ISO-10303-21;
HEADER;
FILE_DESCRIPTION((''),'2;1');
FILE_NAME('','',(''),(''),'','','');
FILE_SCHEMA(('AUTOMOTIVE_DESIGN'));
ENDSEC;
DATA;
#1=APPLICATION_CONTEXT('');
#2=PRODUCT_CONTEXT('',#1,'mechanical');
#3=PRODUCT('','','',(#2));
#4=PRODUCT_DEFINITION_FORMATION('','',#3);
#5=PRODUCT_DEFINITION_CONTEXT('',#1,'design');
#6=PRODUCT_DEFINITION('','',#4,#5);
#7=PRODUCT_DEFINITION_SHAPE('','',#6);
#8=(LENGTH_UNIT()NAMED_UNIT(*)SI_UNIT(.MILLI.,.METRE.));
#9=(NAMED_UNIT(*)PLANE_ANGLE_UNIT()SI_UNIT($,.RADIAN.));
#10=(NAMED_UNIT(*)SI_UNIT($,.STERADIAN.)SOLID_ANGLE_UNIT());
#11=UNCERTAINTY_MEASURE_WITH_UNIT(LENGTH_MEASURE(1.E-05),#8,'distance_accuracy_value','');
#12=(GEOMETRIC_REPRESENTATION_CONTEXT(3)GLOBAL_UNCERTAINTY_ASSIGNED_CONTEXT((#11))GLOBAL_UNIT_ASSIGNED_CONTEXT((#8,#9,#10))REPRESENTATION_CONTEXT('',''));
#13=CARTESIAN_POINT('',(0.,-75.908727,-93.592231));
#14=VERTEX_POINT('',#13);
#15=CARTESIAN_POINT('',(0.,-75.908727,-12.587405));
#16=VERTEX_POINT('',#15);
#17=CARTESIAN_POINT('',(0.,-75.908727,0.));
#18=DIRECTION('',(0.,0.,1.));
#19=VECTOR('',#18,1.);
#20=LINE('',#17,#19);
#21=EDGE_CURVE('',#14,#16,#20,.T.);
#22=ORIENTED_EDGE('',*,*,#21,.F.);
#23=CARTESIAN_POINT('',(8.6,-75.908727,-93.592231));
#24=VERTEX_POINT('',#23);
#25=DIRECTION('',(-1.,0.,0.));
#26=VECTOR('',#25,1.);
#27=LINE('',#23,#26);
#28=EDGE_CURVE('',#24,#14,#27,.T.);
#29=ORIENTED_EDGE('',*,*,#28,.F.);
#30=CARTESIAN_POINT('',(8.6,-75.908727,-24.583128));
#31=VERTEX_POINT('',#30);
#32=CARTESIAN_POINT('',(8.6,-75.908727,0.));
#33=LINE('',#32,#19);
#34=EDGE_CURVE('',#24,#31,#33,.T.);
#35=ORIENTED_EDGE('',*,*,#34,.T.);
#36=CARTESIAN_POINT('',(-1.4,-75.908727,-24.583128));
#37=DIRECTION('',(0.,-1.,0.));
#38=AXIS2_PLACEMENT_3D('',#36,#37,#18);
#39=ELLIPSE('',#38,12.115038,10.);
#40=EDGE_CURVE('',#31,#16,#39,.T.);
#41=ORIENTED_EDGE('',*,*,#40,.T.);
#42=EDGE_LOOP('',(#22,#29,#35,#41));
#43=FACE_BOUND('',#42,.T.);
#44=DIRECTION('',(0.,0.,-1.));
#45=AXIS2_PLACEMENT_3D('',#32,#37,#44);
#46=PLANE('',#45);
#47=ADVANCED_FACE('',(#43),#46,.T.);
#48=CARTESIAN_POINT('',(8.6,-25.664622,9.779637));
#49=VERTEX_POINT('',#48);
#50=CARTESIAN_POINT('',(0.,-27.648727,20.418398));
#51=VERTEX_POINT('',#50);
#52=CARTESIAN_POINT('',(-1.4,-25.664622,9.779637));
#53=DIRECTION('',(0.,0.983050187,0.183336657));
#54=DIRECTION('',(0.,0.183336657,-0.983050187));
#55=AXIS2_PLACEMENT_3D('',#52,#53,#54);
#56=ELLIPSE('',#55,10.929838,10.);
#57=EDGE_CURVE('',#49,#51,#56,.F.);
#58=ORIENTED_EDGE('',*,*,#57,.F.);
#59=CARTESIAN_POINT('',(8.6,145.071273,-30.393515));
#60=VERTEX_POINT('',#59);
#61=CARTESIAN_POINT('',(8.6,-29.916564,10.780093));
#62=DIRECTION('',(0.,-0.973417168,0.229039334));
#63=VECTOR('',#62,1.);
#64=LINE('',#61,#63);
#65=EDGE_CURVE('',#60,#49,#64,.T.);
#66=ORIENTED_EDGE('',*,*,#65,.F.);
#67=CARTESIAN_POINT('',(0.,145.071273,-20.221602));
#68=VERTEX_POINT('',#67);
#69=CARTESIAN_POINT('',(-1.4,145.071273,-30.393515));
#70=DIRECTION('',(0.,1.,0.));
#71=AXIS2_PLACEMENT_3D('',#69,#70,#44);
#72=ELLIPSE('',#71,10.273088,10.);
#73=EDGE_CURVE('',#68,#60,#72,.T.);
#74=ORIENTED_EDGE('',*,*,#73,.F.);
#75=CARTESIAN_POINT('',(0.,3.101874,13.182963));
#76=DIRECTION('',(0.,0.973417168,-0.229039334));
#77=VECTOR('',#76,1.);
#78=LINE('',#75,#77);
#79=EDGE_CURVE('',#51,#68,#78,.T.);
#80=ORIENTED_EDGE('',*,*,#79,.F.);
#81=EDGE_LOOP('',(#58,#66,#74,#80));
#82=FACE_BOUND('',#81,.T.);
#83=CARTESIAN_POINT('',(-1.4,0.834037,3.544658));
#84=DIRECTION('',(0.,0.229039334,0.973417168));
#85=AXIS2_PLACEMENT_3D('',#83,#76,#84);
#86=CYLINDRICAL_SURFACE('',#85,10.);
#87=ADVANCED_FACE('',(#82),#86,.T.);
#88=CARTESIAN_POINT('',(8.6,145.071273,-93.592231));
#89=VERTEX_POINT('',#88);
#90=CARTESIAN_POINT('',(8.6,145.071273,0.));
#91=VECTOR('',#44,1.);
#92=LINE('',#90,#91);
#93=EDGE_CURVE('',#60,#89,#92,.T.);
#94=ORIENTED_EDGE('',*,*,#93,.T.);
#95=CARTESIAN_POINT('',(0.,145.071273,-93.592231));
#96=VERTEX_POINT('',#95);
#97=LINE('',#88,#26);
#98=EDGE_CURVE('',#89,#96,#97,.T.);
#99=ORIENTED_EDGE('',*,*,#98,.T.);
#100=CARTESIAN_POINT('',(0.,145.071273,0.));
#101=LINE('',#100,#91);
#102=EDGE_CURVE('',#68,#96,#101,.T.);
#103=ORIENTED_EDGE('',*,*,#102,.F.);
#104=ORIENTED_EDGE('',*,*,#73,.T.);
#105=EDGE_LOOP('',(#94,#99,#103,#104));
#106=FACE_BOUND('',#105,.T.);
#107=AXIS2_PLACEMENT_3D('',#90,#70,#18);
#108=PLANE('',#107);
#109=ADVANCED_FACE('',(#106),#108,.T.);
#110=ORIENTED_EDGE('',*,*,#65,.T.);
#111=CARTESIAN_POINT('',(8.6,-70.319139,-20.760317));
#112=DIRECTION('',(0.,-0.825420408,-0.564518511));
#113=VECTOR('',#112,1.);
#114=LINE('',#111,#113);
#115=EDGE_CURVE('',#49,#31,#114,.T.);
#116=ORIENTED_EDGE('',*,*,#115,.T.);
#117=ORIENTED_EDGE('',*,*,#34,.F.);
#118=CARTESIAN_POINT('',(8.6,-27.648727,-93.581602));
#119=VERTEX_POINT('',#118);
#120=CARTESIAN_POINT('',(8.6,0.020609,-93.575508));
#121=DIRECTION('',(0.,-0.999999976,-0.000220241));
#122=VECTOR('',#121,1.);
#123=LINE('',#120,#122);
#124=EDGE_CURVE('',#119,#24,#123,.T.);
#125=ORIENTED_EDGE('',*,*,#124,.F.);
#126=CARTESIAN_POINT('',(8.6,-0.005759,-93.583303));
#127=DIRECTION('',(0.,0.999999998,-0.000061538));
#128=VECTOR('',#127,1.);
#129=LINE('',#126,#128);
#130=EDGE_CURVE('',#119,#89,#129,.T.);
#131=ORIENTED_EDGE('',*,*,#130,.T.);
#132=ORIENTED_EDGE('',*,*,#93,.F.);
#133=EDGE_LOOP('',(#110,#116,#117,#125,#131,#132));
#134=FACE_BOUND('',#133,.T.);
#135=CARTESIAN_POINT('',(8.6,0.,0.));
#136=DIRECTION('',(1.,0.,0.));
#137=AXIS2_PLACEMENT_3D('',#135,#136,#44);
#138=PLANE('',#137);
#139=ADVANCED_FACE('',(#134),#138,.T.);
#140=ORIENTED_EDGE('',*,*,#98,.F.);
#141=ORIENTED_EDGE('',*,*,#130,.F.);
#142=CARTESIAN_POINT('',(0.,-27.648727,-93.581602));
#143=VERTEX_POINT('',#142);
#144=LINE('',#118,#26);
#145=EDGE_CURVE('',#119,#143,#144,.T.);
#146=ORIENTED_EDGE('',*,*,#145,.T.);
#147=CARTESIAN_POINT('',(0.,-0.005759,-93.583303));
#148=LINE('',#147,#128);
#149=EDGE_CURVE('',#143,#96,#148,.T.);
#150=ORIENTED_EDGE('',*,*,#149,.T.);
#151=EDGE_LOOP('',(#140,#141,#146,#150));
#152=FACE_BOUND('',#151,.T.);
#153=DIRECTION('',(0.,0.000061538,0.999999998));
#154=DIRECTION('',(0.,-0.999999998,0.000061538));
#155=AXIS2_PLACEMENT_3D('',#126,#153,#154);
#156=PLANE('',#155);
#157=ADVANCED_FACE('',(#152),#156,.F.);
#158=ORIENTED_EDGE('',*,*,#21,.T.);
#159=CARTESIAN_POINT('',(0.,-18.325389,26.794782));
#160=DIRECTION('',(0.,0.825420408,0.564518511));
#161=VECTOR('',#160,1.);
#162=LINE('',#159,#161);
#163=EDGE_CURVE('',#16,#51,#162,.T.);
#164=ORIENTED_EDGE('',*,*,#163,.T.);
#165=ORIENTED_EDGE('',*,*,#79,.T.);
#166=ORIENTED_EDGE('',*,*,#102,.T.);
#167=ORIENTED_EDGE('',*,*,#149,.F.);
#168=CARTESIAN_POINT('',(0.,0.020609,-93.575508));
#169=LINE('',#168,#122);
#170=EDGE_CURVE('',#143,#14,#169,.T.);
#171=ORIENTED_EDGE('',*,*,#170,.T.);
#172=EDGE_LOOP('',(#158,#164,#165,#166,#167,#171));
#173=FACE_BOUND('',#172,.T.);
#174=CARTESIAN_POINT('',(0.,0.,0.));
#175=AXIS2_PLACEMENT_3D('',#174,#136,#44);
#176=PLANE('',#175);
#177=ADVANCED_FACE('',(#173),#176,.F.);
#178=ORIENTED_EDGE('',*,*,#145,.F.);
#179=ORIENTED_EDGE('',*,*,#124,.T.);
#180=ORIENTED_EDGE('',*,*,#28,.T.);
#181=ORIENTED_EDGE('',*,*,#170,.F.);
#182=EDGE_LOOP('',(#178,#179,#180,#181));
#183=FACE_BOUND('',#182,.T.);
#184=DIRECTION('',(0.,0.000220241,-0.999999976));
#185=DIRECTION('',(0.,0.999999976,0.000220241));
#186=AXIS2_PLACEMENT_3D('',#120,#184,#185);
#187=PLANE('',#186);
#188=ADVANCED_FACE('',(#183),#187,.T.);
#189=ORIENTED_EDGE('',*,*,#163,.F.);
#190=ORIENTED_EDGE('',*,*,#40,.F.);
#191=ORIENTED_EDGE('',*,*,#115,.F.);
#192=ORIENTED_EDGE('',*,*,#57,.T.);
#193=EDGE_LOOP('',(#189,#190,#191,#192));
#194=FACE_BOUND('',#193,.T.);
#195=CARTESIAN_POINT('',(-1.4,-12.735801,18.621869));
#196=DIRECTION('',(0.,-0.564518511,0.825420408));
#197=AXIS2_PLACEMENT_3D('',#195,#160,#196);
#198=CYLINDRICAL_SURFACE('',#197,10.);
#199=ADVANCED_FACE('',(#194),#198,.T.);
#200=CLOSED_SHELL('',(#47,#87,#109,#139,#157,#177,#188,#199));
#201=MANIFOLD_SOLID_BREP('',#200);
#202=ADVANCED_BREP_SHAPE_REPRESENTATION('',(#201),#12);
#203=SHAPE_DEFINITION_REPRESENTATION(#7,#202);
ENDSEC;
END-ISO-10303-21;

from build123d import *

# Parameters (mm, degrees)
BOSS_EXTRUDE1_DEPTH = 8.6
FILLET1_R           = 10


with BuildPart() as part:
    # Sketch1 → Boss-Extrude1 (new body)
    with BuildSketch(Plane(origin=(0, 0, 0), x_dir=(0, 0, -1), z_dir=(1, 0, 0))):
        Polygon((-20.418398158, -27.648727352), (93.581601842, -27.648727352), (93.592230689, 145.071272648), (20.221601872, 145.071272648), align=None)
        Polygon((93.581601842, -27.648727352), (93.592230689, -75.908727352), (12.587404818, -75.908727352), (-20.418398158, -27.648727352), align=None)
    extrude(amount=BOSS_EXTRUDE1_DEPTH)

    # Fillet1
    # the kernel refuses this fillet: 10 mm, written as the material it takes off along each edge
    with BuildSketch(Plane(origin=(8.6, -96.341008807, -26.561376141), x_dir=(0, 0.5645185114814042, -0.825420408152609), z_dir=(0, 0.825420408152609, 0.5645185114814043))) as fillet1_piece_1:
        with BuildLine():
            CenterArc((9.901515036, 10), FILLET1_R, 188.047846247, 81.952153753)
            Line((0, 8.6), (-0.198030301, 8.572))
            ThreePointArc((-0.198030301, 8.572), (-0.2, 4.3), (-0.2, 0))
            Line((-0.2, 0), (0, -0.2))
            Line((0, -0.2), (9.901515036, -0.2))
            Line((9.901515036, -0.2), (9.901515036, 0))
        make_face()
    extrude(amount=107.974750842, mode=Mode.SUBTRACT)
    with BuildSketch(Plane(origin=(8.6, 169.167034468, -25.891192892), x_dir=(0, -0.22903933388604258, -0.9734171682958124), z_dir=(0, -0.9734171682958125, 0.22903933388604258))) as fillet1_piece_2:
        with BuildLine():
            CenterArc((9.901515036, -10), FILLET1_R, 90, 81.952153753)
            Line((0, -8.6), (-0.198030301, -8.572))
            ThreePointArc((-0.198030301, -8.572), (-0.2, -4.3), (-0.2, 0))
            Line((-0.2, 0), (0, 0.2))
            Line((0, 0.2), (9.901515036, 0.2))
            Line((9.901515036, 0.2), (9.901515036, 0))
        make_face()
    extrude(amount=226.944347022, mode=Mode.SUBTRACT)


solid = part.part
